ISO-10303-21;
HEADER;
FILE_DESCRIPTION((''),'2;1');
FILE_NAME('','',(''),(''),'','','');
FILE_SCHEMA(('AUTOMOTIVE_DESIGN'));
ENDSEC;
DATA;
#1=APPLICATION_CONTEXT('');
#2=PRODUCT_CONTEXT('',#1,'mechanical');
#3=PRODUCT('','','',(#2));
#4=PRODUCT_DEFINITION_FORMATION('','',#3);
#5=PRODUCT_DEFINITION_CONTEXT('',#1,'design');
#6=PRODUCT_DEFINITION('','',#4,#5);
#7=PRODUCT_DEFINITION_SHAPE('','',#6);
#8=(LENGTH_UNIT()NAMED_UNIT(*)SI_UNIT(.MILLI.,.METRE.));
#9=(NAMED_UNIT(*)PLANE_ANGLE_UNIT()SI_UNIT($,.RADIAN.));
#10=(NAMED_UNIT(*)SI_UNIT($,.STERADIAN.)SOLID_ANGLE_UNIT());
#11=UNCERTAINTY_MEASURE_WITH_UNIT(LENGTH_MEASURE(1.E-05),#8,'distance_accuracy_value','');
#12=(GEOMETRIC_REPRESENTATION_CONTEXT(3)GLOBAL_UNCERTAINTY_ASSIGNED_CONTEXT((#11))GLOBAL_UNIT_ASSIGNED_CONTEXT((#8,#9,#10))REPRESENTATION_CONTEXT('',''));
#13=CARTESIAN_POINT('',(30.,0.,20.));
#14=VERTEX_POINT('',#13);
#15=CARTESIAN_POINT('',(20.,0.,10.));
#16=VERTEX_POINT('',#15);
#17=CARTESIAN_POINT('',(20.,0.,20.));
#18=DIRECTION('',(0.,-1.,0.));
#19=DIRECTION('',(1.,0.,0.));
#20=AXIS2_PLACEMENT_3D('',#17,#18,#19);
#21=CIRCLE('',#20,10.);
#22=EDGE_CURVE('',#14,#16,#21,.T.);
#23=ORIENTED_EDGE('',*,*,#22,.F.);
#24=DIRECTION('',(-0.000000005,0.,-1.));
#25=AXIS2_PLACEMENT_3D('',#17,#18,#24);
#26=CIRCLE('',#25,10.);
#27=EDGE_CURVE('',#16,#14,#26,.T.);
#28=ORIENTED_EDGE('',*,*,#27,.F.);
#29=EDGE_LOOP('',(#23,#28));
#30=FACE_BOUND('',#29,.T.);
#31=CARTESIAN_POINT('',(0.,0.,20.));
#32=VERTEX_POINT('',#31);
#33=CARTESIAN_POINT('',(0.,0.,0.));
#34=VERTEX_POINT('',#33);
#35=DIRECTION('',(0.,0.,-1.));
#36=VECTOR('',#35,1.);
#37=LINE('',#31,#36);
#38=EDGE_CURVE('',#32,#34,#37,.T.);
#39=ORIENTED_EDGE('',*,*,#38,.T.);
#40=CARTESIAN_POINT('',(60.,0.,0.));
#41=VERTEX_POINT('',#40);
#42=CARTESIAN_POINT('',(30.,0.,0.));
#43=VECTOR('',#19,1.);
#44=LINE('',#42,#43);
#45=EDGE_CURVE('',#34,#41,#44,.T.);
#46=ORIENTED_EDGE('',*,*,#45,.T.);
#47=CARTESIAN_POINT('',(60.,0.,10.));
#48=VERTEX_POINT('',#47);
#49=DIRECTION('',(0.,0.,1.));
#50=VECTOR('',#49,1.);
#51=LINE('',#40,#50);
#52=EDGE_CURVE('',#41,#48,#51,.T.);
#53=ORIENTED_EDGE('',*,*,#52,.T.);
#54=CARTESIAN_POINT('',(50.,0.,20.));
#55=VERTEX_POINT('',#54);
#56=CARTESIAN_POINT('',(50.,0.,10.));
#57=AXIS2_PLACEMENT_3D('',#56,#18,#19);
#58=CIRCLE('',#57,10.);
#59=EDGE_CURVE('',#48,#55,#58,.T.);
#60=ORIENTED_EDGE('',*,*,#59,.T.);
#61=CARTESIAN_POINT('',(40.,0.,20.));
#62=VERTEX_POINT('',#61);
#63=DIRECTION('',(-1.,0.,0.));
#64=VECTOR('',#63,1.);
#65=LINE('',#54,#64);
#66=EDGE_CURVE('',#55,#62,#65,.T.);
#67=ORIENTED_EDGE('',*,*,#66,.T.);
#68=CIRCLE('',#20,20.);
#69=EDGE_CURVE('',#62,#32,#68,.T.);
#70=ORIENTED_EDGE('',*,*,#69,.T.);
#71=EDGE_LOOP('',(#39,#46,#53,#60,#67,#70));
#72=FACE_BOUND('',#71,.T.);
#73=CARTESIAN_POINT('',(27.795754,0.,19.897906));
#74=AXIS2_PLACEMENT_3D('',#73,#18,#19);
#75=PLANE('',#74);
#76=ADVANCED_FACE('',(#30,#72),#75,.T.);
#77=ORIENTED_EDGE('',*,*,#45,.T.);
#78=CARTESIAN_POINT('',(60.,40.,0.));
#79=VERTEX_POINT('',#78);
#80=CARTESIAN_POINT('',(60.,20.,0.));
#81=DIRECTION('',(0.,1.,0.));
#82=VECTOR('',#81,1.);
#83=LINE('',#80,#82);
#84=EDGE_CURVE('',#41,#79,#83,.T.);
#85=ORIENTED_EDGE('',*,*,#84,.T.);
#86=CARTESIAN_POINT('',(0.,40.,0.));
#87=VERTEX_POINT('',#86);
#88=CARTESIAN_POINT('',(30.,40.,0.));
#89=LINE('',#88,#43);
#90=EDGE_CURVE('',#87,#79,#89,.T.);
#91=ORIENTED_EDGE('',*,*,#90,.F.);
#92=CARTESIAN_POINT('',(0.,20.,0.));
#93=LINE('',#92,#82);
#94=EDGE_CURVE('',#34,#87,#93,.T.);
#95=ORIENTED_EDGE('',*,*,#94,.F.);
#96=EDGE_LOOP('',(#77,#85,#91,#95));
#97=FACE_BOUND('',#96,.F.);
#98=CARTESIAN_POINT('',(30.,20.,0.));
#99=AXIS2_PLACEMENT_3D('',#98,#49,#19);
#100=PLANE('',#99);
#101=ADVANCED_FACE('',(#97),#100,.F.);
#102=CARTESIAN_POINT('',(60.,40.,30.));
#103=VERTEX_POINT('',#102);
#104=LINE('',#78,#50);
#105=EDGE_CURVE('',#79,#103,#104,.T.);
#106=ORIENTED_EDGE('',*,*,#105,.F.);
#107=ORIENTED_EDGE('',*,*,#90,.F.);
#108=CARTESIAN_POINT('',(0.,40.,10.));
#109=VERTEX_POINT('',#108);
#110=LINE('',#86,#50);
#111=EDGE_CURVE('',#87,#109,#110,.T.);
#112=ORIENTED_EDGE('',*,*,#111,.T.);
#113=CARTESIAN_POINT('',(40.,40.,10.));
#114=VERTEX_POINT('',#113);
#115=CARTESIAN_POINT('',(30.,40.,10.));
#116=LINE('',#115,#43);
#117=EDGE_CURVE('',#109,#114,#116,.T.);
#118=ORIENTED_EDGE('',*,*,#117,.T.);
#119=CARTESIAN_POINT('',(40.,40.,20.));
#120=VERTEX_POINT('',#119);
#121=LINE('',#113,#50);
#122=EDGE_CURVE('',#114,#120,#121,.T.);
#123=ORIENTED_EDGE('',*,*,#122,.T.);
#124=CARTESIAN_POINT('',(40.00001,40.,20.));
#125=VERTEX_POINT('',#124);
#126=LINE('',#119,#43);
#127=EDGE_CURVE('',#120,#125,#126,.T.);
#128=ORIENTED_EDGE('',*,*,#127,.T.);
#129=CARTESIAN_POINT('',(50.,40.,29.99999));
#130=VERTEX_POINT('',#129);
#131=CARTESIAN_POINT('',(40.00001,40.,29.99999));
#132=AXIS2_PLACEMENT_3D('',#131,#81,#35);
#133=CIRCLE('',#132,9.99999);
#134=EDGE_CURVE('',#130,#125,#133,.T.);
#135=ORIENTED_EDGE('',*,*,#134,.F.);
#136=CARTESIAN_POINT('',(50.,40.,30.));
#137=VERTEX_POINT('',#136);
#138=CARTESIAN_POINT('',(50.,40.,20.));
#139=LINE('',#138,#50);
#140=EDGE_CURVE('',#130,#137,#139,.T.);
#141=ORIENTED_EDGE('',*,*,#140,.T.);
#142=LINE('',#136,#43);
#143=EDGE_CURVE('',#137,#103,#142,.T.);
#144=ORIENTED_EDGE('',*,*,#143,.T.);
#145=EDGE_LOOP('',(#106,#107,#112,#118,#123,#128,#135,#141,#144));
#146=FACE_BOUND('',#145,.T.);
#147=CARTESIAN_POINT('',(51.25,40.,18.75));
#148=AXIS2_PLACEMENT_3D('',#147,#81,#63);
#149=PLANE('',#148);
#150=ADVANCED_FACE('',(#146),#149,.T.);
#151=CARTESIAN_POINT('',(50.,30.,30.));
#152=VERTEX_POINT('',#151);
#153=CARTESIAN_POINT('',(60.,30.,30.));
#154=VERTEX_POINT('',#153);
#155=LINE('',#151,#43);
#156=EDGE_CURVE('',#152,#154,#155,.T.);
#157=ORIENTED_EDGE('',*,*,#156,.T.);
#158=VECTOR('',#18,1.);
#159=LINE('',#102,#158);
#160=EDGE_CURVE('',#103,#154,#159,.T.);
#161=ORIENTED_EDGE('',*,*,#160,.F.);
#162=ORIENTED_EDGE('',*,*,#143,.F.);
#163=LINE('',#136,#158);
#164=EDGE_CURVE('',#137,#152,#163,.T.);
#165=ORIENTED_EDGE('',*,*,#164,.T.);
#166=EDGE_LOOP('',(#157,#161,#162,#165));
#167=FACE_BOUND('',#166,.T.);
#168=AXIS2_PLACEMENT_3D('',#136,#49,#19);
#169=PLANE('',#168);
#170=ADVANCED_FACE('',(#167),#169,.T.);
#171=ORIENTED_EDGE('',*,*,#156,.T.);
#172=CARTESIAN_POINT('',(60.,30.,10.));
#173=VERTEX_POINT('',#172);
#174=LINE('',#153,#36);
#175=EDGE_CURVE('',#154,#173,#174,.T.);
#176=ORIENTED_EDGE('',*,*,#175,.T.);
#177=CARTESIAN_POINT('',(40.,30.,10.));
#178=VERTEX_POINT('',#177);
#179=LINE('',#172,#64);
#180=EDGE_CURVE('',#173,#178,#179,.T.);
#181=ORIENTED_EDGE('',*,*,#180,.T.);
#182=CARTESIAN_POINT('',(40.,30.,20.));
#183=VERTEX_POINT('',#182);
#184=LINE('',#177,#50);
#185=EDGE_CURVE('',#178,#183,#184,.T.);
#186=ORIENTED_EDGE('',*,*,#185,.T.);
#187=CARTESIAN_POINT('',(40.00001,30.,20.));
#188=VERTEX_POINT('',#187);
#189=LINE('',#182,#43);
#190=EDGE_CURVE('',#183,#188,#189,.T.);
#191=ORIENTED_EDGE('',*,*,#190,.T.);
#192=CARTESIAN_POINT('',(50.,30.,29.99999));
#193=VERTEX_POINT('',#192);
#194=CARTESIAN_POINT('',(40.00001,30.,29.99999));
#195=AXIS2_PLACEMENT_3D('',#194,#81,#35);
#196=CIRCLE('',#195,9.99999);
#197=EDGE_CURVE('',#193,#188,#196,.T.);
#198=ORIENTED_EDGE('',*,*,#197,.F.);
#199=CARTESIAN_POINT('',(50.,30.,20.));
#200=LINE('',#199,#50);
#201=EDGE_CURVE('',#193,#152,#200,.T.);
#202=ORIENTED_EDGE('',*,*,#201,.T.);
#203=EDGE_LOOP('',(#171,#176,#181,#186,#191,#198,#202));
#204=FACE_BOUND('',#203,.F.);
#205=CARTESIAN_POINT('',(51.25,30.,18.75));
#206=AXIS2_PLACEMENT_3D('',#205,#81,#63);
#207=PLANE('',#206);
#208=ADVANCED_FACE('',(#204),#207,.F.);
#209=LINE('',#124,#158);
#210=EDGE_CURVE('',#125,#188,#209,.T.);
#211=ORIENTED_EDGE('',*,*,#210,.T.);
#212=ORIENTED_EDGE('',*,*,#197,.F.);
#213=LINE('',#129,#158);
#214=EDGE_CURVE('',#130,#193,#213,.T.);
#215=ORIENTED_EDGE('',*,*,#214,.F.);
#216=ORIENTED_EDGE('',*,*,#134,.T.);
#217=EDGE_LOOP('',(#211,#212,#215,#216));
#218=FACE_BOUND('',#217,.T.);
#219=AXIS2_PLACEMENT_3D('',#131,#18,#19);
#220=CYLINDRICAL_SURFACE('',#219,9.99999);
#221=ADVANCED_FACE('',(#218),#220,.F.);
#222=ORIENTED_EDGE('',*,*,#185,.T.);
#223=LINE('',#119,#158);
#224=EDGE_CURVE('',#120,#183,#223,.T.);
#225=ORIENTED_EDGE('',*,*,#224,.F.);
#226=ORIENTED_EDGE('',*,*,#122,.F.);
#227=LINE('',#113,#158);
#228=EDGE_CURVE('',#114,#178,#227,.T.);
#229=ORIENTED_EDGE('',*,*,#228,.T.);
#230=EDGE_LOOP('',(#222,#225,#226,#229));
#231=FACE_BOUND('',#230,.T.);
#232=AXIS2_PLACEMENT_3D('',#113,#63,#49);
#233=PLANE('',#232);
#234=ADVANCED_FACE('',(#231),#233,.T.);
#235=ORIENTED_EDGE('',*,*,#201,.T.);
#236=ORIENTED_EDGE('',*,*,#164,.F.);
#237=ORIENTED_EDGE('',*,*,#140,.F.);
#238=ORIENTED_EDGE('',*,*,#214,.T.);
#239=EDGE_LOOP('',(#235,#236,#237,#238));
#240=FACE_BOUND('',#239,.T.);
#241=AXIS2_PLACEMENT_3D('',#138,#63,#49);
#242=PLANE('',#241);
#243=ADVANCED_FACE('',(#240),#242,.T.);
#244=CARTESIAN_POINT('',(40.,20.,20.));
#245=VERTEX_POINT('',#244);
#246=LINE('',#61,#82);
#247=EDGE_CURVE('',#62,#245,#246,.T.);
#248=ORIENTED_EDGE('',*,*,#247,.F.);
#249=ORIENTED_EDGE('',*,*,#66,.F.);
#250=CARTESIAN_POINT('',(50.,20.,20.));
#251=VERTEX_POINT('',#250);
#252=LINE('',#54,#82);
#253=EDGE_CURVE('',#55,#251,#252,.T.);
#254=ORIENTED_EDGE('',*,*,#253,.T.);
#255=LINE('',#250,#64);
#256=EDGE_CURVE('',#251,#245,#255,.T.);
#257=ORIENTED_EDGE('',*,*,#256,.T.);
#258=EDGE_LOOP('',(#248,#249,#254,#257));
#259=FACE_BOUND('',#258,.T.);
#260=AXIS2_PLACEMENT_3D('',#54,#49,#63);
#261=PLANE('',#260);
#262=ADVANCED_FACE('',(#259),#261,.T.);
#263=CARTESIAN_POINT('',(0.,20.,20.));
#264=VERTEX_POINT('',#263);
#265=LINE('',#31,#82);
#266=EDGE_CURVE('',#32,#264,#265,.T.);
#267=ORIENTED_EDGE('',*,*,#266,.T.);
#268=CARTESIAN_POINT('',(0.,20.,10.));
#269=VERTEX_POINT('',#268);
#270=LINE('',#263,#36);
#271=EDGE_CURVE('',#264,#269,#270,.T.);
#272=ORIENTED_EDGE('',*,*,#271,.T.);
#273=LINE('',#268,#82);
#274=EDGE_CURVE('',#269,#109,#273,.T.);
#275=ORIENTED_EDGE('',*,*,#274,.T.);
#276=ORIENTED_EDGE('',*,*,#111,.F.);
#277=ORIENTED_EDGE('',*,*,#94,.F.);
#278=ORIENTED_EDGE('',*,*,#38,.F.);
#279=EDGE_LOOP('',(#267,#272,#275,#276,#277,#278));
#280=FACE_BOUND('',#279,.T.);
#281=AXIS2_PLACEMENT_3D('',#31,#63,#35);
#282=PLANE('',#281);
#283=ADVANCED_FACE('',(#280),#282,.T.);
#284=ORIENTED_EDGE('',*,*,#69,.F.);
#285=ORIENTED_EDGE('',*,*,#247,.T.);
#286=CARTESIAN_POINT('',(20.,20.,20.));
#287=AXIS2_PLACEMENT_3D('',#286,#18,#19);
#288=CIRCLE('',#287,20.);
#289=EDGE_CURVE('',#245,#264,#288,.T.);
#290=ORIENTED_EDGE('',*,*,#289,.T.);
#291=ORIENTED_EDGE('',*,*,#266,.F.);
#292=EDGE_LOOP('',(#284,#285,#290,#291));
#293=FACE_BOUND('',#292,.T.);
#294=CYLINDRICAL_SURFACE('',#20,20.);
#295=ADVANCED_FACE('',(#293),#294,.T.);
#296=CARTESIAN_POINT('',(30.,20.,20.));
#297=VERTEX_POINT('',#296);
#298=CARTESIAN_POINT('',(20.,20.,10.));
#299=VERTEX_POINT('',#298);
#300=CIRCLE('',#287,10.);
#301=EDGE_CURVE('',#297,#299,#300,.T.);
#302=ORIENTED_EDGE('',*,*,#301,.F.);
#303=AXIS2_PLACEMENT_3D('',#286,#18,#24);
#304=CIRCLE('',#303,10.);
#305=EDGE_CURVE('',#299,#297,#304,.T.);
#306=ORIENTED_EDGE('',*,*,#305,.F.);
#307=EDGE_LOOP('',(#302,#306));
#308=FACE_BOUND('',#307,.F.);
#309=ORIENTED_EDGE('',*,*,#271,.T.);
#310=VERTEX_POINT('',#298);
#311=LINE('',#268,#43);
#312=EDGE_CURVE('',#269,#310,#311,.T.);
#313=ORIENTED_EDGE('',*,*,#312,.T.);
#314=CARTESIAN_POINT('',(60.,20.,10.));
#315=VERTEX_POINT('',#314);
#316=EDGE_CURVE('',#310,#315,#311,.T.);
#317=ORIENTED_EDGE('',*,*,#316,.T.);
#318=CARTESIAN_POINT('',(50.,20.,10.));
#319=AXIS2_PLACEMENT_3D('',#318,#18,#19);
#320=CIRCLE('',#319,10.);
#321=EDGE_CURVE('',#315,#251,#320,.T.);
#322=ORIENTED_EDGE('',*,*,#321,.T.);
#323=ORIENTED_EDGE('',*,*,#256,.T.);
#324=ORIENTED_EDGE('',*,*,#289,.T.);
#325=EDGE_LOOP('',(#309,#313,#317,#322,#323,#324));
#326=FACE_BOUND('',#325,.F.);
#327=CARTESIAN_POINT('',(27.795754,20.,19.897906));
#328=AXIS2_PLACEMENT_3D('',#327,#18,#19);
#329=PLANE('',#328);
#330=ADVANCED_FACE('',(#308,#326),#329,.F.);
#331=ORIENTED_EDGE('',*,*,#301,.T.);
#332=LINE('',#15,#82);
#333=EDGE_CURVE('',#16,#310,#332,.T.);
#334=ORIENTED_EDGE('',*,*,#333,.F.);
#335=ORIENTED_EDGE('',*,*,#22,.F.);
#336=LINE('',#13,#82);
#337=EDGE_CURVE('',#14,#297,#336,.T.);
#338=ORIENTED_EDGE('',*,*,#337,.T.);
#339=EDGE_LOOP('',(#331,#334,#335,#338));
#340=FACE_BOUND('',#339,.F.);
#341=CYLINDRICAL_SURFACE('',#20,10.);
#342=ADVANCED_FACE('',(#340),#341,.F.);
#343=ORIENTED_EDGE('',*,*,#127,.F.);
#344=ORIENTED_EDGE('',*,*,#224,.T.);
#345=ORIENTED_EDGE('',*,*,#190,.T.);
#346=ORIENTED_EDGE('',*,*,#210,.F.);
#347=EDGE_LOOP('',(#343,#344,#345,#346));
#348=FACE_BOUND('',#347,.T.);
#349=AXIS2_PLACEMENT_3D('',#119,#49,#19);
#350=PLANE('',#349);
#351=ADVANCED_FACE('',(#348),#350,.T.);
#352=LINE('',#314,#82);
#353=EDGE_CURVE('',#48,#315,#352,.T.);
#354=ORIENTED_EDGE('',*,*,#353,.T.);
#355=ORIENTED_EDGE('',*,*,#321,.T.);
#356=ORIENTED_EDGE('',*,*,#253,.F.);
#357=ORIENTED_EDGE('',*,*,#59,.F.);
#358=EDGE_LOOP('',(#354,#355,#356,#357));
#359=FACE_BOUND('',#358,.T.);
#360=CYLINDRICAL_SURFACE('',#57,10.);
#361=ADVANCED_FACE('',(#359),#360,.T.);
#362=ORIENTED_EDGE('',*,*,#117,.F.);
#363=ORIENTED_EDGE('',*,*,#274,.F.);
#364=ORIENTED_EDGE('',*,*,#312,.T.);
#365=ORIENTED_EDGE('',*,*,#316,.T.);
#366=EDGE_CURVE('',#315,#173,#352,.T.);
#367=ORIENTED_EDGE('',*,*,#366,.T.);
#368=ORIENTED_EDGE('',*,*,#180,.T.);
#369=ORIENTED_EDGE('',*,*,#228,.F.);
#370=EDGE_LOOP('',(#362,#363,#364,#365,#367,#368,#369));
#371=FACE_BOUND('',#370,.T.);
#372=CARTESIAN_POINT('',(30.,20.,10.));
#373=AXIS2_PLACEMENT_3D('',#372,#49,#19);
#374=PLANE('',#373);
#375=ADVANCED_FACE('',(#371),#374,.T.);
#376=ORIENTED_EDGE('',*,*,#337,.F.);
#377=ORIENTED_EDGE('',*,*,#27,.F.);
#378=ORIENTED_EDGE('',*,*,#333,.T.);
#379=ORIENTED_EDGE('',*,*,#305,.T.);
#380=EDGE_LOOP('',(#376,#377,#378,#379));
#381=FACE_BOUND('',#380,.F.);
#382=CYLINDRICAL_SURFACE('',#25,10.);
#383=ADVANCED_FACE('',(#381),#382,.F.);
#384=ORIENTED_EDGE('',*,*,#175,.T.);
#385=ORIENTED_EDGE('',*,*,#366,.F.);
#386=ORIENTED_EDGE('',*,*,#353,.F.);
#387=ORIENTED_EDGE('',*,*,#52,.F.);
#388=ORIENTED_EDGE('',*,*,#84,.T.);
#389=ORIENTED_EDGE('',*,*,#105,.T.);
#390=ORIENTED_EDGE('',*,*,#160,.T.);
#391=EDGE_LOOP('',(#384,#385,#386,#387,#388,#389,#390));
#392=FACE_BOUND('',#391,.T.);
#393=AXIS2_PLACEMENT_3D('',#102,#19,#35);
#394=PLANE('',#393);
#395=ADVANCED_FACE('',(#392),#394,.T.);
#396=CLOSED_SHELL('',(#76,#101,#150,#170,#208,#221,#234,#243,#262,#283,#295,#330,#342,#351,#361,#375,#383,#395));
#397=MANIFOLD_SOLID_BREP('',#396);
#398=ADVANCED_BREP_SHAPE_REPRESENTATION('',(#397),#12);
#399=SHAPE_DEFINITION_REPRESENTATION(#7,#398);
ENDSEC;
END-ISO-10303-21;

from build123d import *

# Parameters (mm, degrees)
F0_W     = 60
F0_H     = 40
F1_DEPTH = 10
F3_DEPTH = 20
F5_DEPTH = 25
F7_DEPTH = 10
F8_R     = 9.99999


# Not quite as in the source:
# - a fillet or chamfer is up to 0.001 mm smaller than in the source, because OpenCascade refuses the exact size


with BuildPart() as f1:
    # F0 (on Top) → F1 (new body)
    with BuildSketch(Plane.XY):
        with Locations((30, 20)):
            Rectangle(F0_W, F0_H)
    extrude(amount=F1_DEPTH)

    # F2 (on Front) → F3 (join)
    with BuildSketch(Plane.XZ):
        with BuildLine():
            Line((50, 20), (40, 20))
            ThreePointArc((40, 20), (20, 40), (0, 20))
            Line((0, 20), (0, 10))
            Line((0, 10), (60, 10))
            ThreePointArc((60, 10), (57.0710678119, 17.0710678119), (50, 20))
        make_face()
    extrude(amount=-F3_DEPTH)

    # F4 (on face) → F5 (cut)
    with BuildSketch(Plane.XZ):
        with BuildLine():
            ThreePointArc((30, 20), (12.928932207, 27.0710678307), (19.9999999466, 10))
            ThreePointArc((19.9999999466, 10), (27.071067793, 12.9289321693), (30, 20))
        make_face()
    extrude(amount=-F5_DEPTH, mode=Mode.SUBTRACT)

    # F6 (on face) → F7 (join)
    with BuildSketch(Plane(origin=(0, 40, 0), x_dir=(-1, 0, 0), z_dir=(0, 1, 0))):
        Polygon((-60, 30), (-60, 10), (-40, 10), (-40, 20), (-50, 20), (-50, 30), align=None)
    extrude(amount=-F7_DEPTH)

    # F8 (radius 10 in the source; OpenCascade refuses exactly that, so slightly less here)
    f8_edges = [f1.edges().sort_by_distance(p)[0] for p in [
        (50, 35, 20),
    ]]
    fillet(f8_edges, radius=F8_R)


solid = f1.part
